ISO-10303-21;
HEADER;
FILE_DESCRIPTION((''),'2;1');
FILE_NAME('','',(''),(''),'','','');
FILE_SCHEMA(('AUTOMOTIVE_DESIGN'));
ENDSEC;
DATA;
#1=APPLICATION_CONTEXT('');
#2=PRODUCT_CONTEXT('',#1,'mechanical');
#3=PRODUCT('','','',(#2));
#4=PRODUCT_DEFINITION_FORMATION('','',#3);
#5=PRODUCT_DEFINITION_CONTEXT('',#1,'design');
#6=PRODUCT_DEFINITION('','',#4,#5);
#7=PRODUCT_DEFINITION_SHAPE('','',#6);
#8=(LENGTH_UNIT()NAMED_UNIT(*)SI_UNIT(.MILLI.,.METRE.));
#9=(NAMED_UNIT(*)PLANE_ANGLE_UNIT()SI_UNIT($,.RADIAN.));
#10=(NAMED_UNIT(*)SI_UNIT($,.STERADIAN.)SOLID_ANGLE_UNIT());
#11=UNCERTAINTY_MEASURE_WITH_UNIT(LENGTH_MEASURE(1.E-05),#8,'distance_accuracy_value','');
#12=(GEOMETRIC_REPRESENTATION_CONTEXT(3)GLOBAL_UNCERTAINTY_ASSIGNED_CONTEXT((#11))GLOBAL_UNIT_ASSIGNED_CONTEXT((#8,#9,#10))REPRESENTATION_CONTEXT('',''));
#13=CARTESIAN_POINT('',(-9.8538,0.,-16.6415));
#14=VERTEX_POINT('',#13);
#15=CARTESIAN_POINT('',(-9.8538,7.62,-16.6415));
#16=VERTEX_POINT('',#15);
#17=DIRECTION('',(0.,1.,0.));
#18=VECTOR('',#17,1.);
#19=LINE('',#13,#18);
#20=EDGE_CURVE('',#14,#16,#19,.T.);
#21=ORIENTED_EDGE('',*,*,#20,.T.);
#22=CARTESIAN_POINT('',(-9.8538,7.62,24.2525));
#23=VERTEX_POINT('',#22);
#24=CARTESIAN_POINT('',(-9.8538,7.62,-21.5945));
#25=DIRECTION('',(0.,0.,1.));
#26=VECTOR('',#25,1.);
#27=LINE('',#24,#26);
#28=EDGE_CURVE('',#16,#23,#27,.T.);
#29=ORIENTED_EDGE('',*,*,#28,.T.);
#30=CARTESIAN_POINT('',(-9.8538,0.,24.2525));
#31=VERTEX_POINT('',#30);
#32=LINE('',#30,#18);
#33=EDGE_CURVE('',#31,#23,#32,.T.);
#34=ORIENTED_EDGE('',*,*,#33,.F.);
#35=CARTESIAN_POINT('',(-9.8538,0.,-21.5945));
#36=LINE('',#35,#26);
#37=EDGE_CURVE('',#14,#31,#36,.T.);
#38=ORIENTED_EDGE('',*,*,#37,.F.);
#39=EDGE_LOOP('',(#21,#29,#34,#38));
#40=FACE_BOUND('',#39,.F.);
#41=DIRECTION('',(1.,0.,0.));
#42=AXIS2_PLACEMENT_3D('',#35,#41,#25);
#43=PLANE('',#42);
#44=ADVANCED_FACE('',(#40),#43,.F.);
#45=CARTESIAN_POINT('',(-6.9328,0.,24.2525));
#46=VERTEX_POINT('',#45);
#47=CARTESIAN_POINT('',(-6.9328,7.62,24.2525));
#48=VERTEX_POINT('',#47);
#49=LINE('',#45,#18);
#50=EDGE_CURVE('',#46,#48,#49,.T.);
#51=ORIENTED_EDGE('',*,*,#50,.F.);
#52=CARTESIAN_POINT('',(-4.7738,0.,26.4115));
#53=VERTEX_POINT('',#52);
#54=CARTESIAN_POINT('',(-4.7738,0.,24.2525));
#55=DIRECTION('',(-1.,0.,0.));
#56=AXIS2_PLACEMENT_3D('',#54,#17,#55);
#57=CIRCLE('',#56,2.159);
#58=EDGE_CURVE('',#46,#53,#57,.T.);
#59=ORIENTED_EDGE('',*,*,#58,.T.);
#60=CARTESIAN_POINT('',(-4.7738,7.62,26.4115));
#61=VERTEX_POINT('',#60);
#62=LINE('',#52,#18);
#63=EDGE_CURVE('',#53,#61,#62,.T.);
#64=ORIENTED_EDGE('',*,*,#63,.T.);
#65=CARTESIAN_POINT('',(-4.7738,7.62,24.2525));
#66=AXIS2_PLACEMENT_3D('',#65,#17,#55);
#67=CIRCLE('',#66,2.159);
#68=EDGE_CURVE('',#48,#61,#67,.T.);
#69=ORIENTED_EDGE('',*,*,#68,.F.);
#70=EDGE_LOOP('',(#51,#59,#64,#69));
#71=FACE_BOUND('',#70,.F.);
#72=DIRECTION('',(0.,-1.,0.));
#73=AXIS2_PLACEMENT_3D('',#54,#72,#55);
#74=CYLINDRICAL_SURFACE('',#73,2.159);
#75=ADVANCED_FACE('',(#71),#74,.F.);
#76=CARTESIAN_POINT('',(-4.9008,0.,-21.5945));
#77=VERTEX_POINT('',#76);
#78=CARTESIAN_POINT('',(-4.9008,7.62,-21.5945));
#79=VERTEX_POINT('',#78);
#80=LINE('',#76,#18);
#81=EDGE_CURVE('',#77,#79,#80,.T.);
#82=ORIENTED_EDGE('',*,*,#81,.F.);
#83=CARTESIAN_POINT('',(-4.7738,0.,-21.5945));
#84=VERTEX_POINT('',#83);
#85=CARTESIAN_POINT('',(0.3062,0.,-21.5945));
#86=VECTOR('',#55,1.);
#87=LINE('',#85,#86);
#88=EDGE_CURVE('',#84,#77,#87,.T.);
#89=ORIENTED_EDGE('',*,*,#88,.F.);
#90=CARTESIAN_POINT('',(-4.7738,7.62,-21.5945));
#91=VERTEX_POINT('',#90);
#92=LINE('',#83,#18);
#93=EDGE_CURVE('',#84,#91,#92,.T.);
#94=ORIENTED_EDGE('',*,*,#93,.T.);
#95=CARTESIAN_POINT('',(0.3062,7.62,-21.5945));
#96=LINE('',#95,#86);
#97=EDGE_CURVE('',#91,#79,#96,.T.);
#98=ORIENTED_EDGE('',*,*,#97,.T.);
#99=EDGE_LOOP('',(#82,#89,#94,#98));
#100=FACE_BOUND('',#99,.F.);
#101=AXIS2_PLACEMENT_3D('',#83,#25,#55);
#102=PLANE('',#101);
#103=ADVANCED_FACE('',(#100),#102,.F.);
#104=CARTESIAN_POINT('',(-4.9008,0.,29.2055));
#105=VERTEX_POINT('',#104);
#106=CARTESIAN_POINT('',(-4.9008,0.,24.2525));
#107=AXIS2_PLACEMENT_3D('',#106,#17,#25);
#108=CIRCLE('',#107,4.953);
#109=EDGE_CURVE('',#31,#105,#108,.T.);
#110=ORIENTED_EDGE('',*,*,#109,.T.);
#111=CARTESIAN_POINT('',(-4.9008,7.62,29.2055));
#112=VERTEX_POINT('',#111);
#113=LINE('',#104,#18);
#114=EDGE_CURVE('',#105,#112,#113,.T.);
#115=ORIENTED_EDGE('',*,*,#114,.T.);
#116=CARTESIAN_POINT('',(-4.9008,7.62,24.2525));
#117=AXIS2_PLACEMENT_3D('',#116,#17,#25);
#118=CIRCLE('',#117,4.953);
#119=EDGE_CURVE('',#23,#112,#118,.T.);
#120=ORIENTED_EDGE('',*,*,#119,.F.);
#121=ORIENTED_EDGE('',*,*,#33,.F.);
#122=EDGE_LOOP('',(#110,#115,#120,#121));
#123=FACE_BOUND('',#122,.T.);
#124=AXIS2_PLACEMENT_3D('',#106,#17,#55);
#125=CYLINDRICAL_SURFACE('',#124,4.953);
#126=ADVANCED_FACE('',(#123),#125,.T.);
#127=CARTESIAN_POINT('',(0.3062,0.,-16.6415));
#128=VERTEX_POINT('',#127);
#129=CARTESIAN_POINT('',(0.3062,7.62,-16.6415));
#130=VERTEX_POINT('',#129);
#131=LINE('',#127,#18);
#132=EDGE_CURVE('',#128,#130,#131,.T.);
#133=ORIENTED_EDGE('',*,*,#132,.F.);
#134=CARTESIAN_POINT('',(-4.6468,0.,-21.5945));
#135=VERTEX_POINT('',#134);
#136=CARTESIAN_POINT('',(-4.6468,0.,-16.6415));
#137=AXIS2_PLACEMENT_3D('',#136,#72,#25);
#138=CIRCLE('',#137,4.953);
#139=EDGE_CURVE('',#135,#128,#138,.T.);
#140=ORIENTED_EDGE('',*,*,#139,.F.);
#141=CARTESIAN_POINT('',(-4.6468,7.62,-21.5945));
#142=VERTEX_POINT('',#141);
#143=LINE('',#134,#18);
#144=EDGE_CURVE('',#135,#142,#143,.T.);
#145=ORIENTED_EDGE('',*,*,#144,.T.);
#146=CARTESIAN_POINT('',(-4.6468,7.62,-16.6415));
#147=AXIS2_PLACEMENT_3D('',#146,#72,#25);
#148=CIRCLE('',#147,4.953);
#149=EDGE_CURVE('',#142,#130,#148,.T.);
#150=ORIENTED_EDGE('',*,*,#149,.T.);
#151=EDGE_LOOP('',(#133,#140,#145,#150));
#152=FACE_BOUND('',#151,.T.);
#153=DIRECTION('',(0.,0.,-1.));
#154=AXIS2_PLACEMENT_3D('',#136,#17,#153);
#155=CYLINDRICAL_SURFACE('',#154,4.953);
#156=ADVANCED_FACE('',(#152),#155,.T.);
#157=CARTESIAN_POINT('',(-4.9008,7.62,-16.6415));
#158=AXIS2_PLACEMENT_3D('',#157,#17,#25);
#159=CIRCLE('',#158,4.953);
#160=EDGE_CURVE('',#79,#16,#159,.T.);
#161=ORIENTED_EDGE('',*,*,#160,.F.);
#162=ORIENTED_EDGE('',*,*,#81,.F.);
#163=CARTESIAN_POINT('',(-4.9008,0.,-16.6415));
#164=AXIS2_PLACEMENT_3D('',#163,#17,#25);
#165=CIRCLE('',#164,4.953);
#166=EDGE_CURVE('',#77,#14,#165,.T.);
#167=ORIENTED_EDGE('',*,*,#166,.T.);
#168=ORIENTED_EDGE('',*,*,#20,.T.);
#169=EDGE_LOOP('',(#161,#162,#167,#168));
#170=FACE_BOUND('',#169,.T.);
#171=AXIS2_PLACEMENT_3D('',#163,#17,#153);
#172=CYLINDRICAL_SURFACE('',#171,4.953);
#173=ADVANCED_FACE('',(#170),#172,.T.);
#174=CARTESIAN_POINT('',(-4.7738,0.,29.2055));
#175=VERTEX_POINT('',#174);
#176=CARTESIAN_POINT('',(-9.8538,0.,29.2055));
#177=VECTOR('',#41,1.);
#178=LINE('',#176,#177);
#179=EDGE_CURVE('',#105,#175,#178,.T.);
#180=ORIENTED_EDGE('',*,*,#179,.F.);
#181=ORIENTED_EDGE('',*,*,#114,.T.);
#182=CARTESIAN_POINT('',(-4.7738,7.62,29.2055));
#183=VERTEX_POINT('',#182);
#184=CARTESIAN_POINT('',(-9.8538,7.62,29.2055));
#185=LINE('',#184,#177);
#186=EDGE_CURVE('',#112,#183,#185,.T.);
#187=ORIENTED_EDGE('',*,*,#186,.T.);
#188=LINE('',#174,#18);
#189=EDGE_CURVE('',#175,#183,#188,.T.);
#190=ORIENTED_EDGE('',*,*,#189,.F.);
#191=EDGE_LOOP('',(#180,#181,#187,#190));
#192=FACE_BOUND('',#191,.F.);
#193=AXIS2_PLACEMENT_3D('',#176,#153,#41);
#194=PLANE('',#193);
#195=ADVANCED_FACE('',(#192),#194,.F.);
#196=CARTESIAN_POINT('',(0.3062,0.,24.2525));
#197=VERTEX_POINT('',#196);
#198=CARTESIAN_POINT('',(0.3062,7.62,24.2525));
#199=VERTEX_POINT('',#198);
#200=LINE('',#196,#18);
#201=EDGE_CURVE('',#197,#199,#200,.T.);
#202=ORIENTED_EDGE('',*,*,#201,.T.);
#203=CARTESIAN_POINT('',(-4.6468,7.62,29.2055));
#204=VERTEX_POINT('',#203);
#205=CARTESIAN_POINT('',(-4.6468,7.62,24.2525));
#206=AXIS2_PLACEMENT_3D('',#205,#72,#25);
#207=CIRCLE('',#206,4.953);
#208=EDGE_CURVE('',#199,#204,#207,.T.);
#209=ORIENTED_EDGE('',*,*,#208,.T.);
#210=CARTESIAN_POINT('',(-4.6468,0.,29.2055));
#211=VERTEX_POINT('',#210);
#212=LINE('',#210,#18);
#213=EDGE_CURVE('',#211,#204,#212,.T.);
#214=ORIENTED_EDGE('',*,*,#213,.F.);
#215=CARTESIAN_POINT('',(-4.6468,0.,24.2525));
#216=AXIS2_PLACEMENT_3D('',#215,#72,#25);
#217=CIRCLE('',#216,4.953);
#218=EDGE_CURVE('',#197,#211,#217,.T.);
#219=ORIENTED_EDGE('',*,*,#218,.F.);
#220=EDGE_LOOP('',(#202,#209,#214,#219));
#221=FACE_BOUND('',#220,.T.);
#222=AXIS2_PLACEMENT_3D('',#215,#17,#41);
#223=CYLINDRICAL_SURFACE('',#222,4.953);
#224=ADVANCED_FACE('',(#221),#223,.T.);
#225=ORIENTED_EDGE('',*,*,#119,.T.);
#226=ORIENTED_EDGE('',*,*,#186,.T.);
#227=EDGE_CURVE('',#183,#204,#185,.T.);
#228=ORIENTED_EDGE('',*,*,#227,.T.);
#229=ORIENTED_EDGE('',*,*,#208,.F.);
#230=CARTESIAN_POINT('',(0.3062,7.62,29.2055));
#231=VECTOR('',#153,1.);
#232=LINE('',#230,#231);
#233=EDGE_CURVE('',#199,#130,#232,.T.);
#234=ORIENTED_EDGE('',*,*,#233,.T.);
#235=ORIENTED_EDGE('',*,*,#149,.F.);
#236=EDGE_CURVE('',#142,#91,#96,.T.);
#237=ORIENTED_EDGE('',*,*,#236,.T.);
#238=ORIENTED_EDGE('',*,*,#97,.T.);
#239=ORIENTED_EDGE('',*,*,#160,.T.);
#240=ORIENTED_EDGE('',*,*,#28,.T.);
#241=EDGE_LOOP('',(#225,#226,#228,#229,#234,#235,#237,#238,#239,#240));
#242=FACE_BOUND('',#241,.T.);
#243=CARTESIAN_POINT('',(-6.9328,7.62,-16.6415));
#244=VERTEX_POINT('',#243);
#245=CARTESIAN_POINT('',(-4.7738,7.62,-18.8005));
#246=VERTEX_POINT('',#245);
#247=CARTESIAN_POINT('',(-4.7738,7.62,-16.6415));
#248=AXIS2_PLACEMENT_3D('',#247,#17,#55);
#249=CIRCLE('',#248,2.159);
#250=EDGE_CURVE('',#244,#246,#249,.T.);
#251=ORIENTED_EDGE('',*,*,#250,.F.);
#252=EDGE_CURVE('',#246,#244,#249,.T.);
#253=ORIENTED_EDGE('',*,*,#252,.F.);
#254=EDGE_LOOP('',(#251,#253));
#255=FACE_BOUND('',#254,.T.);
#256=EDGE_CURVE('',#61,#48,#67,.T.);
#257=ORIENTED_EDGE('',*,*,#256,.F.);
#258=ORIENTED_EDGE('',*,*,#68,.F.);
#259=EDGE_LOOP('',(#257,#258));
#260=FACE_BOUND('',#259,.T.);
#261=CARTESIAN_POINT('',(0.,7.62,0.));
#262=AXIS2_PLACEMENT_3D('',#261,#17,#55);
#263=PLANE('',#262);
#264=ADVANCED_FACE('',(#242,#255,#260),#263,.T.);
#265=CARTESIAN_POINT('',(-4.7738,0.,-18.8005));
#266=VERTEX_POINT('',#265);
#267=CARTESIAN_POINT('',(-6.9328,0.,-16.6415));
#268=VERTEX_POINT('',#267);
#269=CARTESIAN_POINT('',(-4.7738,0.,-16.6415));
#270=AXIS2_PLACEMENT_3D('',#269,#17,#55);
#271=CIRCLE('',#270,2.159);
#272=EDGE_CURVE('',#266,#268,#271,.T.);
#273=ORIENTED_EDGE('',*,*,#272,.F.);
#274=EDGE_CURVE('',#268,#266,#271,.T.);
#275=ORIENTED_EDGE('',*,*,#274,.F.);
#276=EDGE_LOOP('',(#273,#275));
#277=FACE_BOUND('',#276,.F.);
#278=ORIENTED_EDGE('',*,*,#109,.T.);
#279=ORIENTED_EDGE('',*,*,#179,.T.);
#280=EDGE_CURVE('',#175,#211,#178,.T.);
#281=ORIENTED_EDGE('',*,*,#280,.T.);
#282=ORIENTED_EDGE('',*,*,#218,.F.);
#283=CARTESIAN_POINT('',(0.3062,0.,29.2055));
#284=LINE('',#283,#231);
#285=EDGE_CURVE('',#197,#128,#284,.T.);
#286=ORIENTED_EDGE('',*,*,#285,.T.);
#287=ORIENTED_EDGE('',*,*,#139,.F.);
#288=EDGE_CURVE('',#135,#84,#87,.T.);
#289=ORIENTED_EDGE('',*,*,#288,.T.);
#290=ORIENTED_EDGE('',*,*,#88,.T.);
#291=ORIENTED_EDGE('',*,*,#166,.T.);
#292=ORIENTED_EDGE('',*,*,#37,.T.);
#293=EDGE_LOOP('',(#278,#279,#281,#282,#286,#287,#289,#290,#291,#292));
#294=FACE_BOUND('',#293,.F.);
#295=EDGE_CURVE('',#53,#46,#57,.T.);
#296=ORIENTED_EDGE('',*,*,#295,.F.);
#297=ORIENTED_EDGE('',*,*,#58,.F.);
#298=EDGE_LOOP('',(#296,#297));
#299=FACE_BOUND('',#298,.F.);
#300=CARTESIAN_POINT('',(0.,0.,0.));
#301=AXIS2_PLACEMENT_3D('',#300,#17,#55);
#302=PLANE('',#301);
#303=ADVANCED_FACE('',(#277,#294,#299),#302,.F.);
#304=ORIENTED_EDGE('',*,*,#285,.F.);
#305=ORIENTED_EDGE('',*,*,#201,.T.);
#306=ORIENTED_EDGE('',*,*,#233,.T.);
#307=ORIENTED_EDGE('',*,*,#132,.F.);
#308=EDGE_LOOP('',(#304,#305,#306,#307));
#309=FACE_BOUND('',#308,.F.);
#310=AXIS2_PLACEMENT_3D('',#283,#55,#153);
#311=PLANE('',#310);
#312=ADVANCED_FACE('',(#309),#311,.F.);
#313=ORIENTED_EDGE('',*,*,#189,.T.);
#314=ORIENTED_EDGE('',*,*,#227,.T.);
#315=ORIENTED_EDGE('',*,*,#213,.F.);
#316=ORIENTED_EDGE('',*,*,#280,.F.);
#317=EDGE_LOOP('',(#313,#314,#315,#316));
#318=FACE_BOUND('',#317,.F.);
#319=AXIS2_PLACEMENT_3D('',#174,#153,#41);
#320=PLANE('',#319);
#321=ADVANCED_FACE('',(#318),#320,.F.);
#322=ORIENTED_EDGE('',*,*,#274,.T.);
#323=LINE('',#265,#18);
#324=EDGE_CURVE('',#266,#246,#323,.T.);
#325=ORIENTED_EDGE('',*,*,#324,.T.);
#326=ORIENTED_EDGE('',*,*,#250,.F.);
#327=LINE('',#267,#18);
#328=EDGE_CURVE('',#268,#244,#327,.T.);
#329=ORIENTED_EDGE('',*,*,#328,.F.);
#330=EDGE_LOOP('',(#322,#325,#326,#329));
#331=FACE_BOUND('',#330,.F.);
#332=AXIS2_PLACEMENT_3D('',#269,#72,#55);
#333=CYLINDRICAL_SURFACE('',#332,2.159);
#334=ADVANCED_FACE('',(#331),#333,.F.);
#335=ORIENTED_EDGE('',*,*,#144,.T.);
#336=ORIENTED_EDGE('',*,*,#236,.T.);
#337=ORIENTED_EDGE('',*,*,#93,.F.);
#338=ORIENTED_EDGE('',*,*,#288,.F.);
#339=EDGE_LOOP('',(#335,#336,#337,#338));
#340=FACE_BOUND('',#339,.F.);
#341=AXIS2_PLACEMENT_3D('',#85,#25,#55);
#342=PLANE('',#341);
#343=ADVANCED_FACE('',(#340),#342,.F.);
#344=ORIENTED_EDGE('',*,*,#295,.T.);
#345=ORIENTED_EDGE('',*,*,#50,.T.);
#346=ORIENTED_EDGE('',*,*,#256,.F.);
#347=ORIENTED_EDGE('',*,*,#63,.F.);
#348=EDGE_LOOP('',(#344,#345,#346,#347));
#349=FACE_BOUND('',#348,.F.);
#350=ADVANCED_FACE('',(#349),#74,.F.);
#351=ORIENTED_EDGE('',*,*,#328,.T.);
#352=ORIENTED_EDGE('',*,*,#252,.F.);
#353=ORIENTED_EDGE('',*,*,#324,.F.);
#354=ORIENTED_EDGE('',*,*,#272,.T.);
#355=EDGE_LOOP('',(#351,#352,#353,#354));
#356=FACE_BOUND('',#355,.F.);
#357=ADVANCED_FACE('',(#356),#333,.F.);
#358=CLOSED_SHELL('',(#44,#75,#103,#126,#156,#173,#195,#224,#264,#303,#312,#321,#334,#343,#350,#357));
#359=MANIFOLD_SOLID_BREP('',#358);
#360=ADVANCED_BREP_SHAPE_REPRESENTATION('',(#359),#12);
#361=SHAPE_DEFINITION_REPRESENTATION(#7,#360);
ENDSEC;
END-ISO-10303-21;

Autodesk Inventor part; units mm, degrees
ref_plane "YZ Plane" through (0, 0, 0) normal (1, 0, 0) x (0, 1, 0)
ref_plane "XZ Plane" through (0, 0, 0) normal (0, 1, 0) x (-1, 0, 0)
ref_plane "XY Plane" through (0, 0, 0) normal (0, 0, 1) x (1, 0, 0)
sketch "Sketch1" plane through (0, 0, 0) normal (0, 1, 0) x (-1, 0, 0)
  line L0 (9.8538, 29.2055) -> (-0.3062, 29.2055)
  line L1 (-0.3062, 29.2055) -> (-0.3062, -21.5945)
  line L2 (-0.3062, -21.5945) -> (9.8538, -21.5945)
  line L3 (9.8538, -21.5945) -> (9.8538, 29.2055)
  line L4 (4.7738, -21.5945) -> (4.7738, -16.6415)
  line L5 (4.7738, 29.2055) -> (4.7738, 24.2525)
  circle A0 centre (4.7738, 24.2525) radius 2.159
  circle A1 centre (4.7738, -16.6415) radius 2.159
  point P0 (0, 0)
  dimension "d0" = 10.16
  dimension "d1" = 50.8
  dimension "d2" = 4.953
  dimension "d3" = 4.953
  dimension "d4" = 4.318
  dimension "d5" = 4.318
extrude "Extrusion1" add sketch "Sketch1" along normal blind 7.62
fillet "Fillet1" radius 4.953 1 edges at (0.3062, 3.81, -21.5945)
fillet "Fillet2" radius 4.953 3 edges at (-9.8538, 3.81, -21.5945) (0.3062, 3.81, 29.2055) (-9.8538, 3.81, 29.2055)
properties part number "Hand4"
